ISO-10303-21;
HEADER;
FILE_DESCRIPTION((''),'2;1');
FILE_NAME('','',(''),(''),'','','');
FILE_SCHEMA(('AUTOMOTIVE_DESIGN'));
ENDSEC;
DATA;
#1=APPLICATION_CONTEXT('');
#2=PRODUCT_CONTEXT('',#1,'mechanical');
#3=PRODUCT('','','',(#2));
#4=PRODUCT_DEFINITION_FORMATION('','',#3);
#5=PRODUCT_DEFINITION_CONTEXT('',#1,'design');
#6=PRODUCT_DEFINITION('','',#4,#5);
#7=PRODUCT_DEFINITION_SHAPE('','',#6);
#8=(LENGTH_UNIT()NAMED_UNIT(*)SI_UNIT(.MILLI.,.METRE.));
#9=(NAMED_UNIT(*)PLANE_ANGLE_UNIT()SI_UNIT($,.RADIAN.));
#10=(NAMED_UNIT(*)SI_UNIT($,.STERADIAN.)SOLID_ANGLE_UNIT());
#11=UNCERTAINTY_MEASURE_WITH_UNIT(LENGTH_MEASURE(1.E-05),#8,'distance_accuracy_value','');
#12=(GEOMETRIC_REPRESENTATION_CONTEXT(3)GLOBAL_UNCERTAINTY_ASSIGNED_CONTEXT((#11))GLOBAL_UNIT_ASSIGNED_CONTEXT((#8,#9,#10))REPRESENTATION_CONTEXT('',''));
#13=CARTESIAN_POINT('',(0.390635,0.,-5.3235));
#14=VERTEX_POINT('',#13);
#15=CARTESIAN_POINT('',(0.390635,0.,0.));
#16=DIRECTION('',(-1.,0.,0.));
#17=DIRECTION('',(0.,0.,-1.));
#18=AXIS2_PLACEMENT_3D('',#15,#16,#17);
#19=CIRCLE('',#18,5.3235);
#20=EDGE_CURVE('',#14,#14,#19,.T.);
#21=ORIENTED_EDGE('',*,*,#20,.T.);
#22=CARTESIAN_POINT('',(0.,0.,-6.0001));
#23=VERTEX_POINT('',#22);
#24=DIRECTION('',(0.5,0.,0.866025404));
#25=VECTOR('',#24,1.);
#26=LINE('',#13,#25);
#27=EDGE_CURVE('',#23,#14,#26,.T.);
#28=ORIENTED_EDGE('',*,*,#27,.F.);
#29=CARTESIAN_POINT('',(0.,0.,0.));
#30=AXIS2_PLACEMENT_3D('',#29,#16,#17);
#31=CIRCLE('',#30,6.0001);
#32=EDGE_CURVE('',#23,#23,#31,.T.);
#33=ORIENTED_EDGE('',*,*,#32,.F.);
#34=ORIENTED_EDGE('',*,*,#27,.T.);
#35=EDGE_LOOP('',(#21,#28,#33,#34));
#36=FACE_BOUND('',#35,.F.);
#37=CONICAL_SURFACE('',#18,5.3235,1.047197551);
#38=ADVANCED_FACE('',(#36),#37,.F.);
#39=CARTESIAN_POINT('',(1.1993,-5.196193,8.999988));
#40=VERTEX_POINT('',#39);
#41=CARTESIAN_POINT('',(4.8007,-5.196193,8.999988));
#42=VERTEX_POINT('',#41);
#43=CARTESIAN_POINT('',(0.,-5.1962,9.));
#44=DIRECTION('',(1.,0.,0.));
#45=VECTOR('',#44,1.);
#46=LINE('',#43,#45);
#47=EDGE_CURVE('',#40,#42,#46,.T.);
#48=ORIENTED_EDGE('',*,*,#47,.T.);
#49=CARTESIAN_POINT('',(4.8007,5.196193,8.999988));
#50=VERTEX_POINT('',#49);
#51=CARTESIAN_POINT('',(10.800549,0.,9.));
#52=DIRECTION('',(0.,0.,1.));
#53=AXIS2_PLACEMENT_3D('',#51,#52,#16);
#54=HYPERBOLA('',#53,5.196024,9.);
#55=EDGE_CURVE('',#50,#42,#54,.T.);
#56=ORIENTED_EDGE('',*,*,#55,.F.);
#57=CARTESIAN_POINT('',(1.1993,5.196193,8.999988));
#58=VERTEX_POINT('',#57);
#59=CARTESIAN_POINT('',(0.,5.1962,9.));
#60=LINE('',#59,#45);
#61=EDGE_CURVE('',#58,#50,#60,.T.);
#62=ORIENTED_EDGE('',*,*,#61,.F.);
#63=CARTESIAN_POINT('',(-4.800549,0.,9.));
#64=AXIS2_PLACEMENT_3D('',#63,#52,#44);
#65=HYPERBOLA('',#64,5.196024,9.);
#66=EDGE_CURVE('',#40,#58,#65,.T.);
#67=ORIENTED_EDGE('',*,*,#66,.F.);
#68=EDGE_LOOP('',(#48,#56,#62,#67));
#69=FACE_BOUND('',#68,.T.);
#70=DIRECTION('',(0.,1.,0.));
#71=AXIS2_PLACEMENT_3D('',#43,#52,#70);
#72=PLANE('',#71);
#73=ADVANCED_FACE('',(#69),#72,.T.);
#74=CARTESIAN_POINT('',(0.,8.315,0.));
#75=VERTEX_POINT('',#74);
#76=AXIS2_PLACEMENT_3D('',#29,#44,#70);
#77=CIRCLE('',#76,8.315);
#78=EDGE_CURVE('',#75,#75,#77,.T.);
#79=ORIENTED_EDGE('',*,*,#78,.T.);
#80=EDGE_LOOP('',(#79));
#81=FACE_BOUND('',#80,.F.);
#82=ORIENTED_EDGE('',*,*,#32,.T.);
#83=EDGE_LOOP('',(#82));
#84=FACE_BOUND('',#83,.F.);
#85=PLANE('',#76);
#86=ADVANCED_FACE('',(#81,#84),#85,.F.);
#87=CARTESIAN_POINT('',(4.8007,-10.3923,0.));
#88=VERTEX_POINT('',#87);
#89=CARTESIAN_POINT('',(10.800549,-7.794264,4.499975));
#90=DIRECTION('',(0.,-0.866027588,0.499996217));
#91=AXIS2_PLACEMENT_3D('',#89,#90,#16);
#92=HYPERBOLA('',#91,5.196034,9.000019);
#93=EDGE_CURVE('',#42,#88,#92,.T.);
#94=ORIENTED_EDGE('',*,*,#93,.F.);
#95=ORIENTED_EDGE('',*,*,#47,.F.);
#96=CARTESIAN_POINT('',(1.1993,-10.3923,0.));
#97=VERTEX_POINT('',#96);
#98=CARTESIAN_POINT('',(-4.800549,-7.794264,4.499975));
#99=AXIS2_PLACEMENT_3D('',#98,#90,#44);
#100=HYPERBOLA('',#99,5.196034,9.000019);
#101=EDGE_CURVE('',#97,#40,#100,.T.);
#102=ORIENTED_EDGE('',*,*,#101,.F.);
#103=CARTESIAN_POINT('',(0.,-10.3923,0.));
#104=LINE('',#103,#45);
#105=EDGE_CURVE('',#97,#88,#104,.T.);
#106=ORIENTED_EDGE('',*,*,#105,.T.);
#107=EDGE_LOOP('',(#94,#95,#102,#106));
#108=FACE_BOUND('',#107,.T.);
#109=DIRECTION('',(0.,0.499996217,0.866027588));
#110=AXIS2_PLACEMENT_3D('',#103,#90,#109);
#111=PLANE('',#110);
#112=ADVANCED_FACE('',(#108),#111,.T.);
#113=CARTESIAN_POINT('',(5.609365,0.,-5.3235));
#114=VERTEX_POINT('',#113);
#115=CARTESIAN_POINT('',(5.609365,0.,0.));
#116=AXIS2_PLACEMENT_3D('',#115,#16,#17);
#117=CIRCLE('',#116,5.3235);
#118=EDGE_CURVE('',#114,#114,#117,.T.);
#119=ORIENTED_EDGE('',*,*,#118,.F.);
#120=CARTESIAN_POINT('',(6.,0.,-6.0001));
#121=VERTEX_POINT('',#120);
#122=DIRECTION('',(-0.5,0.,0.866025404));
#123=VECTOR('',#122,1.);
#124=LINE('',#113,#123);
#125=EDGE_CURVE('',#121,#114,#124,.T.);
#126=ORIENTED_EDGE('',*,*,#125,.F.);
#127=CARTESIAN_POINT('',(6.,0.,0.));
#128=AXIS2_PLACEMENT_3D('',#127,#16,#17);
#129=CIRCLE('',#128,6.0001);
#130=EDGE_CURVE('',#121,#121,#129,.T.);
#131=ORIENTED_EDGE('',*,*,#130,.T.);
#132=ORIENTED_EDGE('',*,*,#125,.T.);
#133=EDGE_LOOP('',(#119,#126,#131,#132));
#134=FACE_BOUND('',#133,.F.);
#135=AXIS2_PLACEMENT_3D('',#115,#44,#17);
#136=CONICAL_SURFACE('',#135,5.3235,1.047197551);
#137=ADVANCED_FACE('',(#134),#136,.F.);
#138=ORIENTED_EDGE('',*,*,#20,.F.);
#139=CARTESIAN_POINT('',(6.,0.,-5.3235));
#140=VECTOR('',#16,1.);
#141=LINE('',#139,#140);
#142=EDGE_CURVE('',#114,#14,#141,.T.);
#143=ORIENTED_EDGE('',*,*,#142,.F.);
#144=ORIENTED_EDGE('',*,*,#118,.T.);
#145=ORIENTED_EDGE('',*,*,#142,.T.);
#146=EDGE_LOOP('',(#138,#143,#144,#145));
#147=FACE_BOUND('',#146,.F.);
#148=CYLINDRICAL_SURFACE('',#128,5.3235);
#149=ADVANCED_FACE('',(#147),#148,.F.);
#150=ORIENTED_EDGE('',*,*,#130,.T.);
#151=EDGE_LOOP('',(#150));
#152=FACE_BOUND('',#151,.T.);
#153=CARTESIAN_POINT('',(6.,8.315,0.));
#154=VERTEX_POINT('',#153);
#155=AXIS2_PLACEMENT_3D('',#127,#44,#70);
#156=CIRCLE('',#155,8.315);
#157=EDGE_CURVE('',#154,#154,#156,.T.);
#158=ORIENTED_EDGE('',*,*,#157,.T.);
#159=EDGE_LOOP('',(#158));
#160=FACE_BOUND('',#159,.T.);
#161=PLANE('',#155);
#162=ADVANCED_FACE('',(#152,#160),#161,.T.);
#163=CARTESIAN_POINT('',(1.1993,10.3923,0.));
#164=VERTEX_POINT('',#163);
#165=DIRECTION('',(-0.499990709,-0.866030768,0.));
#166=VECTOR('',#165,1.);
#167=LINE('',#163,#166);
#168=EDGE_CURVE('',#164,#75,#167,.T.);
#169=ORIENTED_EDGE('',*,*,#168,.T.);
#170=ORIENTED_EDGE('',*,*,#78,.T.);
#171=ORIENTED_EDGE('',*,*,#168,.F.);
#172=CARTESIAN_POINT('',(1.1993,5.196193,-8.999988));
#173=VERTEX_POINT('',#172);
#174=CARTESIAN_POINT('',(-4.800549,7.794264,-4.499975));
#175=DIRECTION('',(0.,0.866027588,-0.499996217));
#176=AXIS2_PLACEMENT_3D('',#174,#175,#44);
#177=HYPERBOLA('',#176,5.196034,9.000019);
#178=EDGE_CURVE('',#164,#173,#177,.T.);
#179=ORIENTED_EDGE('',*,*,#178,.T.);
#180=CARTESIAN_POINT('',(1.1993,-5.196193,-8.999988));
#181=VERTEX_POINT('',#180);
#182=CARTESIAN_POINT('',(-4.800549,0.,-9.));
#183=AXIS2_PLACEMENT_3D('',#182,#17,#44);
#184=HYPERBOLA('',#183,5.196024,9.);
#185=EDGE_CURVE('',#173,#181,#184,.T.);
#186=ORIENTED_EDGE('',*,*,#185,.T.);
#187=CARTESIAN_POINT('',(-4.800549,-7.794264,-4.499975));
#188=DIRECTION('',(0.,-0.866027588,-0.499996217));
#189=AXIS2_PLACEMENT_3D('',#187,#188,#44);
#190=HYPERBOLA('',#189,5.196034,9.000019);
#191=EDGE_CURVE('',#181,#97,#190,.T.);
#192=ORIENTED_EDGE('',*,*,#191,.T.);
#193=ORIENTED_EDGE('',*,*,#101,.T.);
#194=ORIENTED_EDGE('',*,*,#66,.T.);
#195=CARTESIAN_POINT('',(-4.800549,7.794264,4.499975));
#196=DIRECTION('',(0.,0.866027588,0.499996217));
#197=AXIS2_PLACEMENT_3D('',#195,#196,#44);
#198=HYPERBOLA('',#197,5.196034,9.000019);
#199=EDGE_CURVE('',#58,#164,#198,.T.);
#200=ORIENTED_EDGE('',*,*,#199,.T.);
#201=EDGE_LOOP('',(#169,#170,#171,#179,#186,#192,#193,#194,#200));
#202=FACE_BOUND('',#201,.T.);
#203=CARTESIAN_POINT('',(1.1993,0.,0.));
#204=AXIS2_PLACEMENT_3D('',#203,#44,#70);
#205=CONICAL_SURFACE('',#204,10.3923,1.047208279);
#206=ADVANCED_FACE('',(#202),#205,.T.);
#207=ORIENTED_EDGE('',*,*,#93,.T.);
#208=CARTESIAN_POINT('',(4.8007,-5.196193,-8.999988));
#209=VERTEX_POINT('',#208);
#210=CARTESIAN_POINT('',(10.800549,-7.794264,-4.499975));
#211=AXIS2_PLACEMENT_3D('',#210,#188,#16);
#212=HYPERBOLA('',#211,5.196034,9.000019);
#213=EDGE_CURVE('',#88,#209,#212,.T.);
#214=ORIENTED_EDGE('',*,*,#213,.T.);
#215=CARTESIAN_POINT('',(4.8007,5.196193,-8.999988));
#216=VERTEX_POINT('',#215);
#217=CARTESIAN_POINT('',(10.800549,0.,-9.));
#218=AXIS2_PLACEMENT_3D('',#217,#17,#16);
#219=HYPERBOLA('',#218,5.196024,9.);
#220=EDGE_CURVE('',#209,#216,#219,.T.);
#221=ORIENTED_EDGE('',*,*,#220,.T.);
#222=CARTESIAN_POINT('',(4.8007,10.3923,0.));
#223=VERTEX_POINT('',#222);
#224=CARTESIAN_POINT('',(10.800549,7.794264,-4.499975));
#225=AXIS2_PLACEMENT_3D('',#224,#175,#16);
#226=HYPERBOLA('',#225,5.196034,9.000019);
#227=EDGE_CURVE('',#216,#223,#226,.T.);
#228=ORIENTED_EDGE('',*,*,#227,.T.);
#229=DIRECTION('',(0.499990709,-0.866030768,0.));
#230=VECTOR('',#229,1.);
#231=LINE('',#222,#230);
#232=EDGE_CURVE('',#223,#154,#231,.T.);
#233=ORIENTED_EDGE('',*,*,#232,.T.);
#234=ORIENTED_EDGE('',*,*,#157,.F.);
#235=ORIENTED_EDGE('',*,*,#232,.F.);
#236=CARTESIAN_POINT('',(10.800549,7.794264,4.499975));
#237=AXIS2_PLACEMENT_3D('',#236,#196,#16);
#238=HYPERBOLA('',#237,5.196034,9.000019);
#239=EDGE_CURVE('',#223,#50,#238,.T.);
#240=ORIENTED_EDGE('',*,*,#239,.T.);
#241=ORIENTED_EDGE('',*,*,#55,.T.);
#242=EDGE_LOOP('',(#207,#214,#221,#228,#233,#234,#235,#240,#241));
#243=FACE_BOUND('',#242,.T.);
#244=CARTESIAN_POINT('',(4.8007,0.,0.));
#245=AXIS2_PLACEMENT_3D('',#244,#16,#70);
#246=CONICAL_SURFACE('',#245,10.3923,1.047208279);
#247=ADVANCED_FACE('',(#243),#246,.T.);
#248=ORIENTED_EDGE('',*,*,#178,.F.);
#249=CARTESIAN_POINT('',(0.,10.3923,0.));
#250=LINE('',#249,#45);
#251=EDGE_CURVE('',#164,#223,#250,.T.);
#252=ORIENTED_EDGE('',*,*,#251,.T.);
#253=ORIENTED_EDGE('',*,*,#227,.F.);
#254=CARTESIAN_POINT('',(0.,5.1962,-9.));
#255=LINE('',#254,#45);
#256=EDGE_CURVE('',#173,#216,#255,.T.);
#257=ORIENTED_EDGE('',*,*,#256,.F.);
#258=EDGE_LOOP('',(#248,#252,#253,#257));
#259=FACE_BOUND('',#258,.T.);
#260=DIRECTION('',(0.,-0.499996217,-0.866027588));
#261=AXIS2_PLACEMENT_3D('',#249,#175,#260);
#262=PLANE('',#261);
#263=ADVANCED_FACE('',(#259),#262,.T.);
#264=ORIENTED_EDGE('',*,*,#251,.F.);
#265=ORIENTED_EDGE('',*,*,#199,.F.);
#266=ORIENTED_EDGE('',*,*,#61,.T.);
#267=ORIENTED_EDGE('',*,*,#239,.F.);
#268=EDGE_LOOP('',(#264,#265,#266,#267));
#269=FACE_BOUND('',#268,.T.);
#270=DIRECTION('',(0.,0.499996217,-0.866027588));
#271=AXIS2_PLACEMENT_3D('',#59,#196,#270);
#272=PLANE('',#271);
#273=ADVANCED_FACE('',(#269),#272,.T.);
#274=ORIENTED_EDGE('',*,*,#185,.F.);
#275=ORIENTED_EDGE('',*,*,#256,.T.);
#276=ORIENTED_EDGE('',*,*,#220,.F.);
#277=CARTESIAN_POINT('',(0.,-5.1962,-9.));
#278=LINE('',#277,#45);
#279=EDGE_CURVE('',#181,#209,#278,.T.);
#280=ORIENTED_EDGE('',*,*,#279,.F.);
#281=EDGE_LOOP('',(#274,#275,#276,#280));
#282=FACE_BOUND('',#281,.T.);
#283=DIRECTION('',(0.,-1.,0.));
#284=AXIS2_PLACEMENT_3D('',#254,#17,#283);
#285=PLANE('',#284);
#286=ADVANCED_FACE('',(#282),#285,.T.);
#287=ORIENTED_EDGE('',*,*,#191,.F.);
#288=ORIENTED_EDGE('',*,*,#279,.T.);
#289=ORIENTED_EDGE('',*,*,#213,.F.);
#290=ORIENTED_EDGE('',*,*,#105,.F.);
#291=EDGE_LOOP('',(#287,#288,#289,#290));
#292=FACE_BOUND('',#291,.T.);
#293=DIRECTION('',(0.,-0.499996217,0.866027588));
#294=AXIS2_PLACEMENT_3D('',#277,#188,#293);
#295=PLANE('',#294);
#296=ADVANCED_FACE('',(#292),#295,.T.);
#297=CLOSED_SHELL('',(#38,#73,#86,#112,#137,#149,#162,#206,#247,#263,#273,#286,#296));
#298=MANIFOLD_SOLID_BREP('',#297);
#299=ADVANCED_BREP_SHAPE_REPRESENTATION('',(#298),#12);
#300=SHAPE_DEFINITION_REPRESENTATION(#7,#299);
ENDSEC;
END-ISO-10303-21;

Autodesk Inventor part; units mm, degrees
ref_plane "YZ Plane" through (0, 0, 0) normal (1, 0, 0) x (0, 1, 0)
ref_plane "XZ Plane" through (0, 0, 0) normal (0, 1, 0) x (-1, 0, 0)
sketch "Skizze1" plane through (0, 0, 0) normal (1, 0, 0) x (0, 1, 0)
  line L0 (-10.3923, 0) -> (-5.1962, 9)
  line L1 (-5.1962, 9) -> (5.1962, 9)
  line L2 (5.1962, 9) -> (10.3923, 0)
  line L3 (10.3923, 0) -> (5.1962, -9)
  line L4 (5.1962, -9) -> (-5.1962, -9)
  line L5 (-5.1962, -9) -> (-10.3923, 0)
  point P0 (0, 0)
  point P1 (0, 0)
  dimension "d0" = 20.7846
extrude "Körper" add sketch "Skizze1" along normal blind 6
sketch "Skizze2" plane through (0, 0, 0) normal (0, 0, 1) x (1, 0, 0)
  line L0 (0, 5.1962) -> (0, 10.3923) projected
  line L1 (0, 10.3923) -> (6, 10.3923) projected
  line L2 (6, 5.1962) -> (6, 10.3923) projected
  line L3 (-1.2, 0) -> (7.2, 0) projected
  line L4 (1.1993, 10.3923) -> (0, 8.315)
  line L5 (4.8007, 10.3923) -> (6, 8.315)
  dimension "d3" = 30
  dimension "d4" = 30
  dimension "d5" = 16.63
  dimension "d6" = 16.63
revolve "Fase1" cut sketch "Skizze2" angle 360 about axis through (-10, 0, 0) along (1, 0, 0)
sketch "Skizze3" plane through (6, 0, 0) normal (1, 0, 0) x (0, 0, -1)
  arc A0 (-0.625, -1.0825) -> (0.625, -1.0825) centre (0, 0) ccw projected
hole "Gewinde" at (6, 0, 0) direction (-1, 0, 0) diameter 10.647 end through all thread size "M12x1.25" class "6H" standard "ISO Metric profile"
chamfer "Fase2" distance 0.6766 angle 30 1 edges at (6, 0, 5.3235) measured on face at (6, 7.2244, -0.8772)
chamfer "Fase3" distance 0.6766 angle 30 1 edges at (0, 0, 5.3235) measured on face at (0, 7.2244, -0.8772)
ref_plane "Work Plane1" through (-22.2768, 0, 0) normal (0, -0.8660254, -0.5) x (1, 0, 0)
equation "\"d0\" = 1.1547 * SW"
equation "\"d1\" = KOH"
equation "\"d3\" = ANG1"
equation "\"d4\" = ANG2"
equation "\"d5\" = SW0"
equation "\"d6\" = SW01"
equation "\"d8\" = -0.5 * GD1 + 0.5 * NND"
equation "\"d40\" = -0.5 * GD1 + 0.5 * NND"
equation "\"d10\" = -0.5 * GD1 + 0.5 * NND"
equation "\"d41\" = -0.5 * GD1 + 0.5 * NND"
equation "\"ANG1\" = 30deg"
equation "\"ANG2\" = 30deg"
equation "\"NND\" = 12"
equation "\"KOH\" = 6"
equation "\"SW\" = 18"
equation "\"SW0\" = 16.63"
equation "\"SW01\" = SW0"
equation "\"GUL\" = 0.541266 * PTC"
equation "\"THREADDIA\" = 12"
equation "\"TOA\" = 30deg"
equation "\"PTC\" = 1.25"
equation "\"E0\" = 1.155 * SW"
equation "\"GAL\" = 0.541266 * PTC"
equation "\"GD1\" = 10.646835"
properties part number "ISO 8675 - M12 x 1,25" material "Edelstahl, 440C"
